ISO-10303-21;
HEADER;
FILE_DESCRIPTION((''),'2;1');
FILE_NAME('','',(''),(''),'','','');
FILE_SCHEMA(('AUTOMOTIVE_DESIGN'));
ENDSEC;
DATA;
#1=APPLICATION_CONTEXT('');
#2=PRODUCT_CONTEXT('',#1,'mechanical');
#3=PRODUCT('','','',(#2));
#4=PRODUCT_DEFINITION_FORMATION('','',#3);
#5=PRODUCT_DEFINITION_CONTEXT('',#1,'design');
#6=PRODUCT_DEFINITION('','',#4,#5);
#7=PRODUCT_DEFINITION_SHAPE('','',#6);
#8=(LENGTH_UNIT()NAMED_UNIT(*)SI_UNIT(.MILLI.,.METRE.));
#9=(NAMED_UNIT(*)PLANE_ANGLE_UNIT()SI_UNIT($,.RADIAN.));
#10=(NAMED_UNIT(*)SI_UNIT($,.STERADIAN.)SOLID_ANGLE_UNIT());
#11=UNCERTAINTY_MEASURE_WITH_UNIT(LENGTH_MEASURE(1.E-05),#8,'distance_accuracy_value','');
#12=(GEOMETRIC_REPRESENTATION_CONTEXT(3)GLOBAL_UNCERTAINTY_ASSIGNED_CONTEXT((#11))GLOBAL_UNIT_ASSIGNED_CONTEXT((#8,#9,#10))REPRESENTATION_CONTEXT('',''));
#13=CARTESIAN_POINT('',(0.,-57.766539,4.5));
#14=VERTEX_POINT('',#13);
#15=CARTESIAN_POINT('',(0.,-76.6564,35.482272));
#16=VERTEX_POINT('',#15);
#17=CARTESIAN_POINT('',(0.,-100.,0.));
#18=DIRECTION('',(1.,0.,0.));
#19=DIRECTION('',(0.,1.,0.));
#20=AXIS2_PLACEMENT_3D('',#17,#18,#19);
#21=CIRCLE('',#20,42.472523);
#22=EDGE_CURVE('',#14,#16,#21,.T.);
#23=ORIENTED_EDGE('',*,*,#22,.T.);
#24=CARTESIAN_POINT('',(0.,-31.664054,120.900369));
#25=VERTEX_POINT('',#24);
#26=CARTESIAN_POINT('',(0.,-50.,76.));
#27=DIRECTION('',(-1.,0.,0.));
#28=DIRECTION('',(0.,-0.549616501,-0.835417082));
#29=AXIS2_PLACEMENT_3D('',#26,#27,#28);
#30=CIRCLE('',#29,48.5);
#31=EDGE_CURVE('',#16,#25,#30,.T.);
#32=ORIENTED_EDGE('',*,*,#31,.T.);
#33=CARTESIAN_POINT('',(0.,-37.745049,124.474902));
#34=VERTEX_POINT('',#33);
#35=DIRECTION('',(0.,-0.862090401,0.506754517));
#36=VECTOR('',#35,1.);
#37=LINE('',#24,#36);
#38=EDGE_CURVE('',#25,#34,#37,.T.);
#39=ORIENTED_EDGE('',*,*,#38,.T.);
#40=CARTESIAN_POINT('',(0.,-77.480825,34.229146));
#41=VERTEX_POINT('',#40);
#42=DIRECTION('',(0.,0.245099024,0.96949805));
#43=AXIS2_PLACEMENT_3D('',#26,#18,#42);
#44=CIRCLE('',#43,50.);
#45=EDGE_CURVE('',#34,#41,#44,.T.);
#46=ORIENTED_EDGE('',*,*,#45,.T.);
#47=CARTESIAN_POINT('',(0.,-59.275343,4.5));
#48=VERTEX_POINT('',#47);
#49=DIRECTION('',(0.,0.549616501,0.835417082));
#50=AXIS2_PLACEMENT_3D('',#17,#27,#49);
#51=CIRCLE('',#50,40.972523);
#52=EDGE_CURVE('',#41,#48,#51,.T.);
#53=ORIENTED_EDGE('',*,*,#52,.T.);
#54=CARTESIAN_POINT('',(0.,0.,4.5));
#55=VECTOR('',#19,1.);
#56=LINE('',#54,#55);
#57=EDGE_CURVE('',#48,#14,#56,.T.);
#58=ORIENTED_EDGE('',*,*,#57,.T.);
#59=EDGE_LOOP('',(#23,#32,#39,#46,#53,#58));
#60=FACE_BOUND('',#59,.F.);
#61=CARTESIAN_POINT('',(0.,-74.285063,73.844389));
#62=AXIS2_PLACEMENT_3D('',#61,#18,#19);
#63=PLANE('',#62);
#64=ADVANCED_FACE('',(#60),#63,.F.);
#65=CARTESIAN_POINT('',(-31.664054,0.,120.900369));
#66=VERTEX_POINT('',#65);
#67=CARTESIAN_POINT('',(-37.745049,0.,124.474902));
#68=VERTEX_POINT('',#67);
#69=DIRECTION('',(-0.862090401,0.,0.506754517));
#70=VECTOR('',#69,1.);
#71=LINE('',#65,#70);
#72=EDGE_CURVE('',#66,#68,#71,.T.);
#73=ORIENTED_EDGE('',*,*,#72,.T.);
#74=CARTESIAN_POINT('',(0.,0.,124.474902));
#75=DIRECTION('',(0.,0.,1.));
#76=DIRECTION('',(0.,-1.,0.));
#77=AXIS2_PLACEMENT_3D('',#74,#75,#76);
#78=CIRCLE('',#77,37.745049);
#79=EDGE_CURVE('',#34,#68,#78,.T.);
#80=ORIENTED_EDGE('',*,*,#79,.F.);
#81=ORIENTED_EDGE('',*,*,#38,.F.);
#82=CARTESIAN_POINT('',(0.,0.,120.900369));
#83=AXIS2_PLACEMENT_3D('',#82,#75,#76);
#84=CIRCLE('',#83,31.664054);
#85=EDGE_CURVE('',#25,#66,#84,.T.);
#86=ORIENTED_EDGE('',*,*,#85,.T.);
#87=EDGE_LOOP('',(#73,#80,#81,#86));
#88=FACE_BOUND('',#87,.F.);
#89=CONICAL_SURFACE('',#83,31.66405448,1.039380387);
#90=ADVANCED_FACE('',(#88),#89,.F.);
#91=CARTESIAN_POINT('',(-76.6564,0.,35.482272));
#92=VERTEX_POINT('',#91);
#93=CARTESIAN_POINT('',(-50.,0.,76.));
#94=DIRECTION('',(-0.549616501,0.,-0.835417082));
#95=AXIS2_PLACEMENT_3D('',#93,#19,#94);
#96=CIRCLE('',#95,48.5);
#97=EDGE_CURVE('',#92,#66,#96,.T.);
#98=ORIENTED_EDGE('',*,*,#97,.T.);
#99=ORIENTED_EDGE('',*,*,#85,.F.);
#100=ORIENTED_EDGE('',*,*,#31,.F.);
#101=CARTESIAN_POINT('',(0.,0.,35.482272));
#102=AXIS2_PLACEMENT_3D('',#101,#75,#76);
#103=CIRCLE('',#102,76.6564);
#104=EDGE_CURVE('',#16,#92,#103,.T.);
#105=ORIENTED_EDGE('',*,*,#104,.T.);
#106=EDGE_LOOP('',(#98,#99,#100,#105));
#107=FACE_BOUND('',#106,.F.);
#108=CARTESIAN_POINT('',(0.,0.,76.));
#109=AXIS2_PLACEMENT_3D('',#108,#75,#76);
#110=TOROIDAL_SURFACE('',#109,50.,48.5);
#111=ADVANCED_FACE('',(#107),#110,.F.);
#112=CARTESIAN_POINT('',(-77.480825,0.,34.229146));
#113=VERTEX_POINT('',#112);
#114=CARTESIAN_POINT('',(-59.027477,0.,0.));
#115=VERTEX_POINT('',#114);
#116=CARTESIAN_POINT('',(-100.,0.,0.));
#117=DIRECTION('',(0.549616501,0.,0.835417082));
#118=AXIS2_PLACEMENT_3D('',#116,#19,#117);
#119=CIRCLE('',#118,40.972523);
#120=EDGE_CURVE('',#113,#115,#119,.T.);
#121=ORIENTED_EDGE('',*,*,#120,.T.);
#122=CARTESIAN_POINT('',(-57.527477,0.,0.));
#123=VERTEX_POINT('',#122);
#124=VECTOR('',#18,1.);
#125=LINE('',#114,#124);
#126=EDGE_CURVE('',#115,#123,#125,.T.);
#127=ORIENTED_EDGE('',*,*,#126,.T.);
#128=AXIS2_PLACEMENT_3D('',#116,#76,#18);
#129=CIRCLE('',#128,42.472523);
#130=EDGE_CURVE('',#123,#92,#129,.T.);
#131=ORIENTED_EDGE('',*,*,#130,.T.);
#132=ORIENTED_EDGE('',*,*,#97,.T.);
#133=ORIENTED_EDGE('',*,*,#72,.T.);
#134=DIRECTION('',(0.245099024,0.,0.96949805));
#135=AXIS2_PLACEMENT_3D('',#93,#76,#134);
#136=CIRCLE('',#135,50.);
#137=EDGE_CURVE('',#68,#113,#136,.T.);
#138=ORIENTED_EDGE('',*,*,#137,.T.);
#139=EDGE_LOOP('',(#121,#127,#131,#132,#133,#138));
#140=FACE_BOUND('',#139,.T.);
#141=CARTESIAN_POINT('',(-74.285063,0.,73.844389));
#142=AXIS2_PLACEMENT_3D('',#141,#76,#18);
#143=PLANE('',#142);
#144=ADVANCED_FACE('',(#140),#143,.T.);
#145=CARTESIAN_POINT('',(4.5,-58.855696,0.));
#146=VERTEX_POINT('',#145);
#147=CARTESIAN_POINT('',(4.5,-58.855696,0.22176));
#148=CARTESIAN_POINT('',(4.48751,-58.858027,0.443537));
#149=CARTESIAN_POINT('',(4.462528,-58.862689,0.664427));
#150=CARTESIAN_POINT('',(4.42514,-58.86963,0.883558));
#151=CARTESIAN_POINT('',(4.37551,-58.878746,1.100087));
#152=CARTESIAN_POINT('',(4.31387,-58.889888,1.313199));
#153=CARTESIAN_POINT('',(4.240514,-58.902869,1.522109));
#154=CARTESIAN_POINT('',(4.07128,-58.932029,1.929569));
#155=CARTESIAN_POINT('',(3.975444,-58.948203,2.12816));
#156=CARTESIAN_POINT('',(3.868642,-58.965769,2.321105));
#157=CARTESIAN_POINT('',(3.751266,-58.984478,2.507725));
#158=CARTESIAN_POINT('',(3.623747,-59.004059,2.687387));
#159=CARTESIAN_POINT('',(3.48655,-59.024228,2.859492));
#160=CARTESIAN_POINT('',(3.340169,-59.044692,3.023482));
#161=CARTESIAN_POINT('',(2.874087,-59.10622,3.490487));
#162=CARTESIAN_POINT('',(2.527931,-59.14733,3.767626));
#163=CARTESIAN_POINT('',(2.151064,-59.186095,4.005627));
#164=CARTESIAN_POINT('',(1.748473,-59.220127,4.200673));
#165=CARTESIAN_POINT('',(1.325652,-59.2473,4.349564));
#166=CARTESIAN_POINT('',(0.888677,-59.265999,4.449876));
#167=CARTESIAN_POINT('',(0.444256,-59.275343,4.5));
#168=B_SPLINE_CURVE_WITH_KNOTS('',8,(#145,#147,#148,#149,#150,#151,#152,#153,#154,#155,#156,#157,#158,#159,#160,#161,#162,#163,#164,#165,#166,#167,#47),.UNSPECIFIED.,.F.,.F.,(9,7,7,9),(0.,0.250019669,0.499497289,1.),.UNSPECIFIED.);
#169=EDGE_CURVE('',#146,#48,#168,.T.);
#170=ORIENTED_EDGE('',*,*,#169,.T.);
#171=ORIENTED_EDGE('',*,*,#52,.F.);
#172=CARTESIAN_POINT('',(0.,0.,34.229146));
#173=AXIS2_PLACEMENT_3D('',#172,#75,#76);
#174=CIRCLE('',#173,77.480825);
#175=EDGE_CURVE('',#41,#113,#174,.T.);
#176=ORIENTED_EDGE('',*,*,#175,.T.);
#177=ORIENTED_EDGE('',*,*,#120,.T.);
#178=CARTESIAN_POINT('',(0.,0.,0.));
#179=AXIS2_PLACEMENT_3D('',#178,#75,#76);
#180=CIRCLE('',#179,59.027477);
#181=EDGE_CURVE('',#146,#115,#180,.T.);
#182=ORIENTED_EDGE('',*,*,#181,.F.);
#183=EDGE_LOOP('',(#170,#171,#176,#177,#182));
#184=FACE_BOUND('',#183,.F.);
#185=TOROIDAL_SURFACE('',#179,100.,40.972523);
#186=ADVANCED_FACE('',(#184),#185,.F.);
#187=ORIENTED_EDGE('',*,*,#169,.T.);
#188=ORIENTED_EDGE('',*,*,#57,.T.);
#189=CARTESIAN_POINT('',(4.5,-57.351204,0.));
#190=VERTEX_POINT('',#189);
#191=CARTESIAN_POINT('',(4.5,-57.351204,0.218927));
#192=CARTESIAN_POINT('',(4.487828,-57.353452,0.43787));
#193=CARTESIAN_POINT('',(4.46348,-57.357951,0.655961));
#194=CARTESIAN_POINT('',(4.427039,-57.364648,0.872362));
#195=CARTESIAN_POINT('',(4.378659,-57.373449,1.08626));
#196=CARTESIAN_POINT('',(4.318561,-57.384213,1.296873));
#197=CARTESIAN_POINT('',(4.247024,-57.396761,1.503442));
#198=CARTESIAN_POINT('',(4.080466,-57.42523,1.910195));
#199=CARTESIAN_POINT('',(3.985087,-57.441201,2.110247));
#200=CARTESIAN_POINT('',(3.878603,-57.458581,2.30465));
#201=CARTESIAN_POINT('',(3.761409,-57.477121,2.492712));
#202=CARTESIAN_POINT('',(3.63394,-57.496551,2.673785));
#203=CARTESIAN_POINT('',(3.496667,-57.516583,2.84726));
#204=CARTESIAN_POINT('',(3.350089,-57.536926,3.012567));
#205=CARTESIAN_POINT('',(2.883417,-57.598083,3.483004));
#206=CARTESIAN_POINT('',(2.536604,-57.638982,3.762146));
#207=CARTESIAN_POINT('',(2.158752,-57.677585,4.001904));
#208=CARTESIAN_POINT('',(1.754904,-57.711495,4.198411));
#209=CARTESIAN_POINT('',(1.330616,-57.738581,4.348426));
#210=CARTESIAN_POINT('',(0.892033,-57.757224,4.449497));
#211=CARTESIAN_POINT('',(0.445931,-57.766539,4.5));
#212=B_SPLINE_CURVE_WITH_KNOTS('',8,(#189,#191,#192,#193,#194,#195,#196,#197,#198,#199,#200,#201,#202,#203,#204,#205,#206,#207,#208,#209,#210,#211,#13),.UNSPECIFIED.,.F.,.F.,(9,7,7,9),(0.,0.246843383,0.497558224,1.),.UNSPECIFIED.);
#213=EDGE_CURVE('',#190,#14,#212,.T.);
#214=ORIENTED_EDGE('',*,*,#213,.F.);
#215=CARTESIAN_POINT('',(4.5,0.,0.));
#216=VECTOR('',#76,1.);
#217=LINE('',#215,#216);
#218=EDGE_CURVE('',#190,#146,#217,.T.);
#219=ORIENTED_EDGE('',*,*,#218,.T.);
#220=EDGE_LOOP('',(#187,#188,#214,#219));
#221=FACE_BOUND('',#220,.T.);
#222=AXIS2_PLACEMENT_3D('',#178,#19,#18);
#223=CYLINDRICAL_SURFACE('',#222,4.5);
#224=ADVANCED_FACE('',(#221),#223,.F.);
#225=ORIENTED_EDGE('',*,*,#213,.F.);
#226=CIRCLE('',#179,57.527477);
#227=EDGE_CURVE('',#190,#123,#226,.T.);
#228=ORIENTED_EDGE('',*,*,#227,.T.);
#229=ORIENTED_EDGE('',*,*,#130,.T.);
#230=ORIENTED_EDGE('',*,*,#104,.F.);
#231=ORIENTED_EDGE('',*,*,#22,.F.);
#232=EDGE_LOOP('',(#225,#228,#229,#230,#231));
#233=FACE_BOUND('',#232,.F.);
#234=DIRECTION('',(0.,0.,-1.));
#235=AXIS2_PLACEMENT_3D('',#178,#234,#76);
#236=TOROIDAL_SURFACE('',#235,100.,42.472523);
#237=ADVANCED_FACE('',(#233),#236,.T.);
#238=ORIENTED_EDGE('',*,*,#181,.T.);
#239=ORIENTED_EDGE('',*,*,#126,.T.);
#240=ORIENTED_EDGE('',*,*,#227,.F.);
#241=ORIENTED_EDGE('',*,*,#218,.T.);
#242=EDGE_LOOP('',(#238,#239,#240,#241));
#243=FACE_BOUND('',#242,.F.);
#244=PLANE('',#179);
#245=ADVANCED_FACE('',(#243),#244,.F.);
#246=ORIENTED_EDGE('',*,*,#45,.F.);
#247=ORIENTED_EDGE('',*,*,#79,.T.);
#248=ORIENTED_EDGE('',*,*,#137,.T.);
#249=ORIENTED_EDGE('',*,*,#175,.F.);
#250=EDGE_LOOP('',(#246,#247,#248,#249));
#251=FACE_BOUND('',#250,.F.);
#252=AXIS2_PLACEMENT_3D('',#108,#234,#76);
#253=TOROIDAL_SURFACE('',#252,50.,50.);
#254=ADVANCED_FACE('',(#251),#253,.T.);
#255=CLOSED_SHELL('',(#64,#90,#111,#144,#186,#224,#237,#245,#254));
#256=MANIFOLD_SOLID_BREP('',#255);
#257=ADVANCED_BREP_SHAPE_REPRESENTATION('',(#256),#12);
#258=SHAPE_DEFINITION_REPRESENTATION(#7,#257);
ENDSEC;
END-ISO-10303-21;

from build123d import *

# Parameters (mm, degrees)
F1_ANGLE = 270
F3_DEPTH = 100.001


# Not quite as in the source:
# - a feature names something its author has since deleted; it is built from what else it names


with BuildPart() as f1:
    # F0 (on Right) → F1 (revolve)
    with BuildSketch(Plane.YZ):
        with BuildLine():
            ThreePointArc((-76.6564003216, 35.4822715112), (-92.9111910846, 98.6026476259), (-31.6640544802, 120.9003686165))
            Line((-31.6640544802, 120.9003686165), (-37.7450487886, 124.4749024837))
            ThreePointArc((-37.7450487886, 124.4749024837), (-95.7605829794, 96.1486735392), (-77.4808250738, 34.2291458878))
            ThreePointArc((-77.4808250738, 34.2291458878), (-63.9346767138, 19.4432539414), (-59.0274766756, 0))
            Line((-59.0274766756, 0), (-57.5274766756, 0))
            ThreePointArc((-57.5274766756, 0), (-62.6143288187, 20.1550695325), (-76.6564003216, 35.4822715112))
        make_face()
    revolve(axis=Axis((0, 0, 76), (0, 0, 1)), revolution_arc=F1_ANGLE)

    # F2 (on Front) → F3 (cut, through all)
    with BuildSketch(Plane.XZ):
        with BuildLine():
            Line((-4.5, 0), (4.5, 0))
            ThreePointArc((4.5, 0), (0, 4.5), (-4.5, 0))
        make_face()
    extrude(amount=F3_DEPTH, mode=Mode.SUBTRACT)


solid = f1.part
